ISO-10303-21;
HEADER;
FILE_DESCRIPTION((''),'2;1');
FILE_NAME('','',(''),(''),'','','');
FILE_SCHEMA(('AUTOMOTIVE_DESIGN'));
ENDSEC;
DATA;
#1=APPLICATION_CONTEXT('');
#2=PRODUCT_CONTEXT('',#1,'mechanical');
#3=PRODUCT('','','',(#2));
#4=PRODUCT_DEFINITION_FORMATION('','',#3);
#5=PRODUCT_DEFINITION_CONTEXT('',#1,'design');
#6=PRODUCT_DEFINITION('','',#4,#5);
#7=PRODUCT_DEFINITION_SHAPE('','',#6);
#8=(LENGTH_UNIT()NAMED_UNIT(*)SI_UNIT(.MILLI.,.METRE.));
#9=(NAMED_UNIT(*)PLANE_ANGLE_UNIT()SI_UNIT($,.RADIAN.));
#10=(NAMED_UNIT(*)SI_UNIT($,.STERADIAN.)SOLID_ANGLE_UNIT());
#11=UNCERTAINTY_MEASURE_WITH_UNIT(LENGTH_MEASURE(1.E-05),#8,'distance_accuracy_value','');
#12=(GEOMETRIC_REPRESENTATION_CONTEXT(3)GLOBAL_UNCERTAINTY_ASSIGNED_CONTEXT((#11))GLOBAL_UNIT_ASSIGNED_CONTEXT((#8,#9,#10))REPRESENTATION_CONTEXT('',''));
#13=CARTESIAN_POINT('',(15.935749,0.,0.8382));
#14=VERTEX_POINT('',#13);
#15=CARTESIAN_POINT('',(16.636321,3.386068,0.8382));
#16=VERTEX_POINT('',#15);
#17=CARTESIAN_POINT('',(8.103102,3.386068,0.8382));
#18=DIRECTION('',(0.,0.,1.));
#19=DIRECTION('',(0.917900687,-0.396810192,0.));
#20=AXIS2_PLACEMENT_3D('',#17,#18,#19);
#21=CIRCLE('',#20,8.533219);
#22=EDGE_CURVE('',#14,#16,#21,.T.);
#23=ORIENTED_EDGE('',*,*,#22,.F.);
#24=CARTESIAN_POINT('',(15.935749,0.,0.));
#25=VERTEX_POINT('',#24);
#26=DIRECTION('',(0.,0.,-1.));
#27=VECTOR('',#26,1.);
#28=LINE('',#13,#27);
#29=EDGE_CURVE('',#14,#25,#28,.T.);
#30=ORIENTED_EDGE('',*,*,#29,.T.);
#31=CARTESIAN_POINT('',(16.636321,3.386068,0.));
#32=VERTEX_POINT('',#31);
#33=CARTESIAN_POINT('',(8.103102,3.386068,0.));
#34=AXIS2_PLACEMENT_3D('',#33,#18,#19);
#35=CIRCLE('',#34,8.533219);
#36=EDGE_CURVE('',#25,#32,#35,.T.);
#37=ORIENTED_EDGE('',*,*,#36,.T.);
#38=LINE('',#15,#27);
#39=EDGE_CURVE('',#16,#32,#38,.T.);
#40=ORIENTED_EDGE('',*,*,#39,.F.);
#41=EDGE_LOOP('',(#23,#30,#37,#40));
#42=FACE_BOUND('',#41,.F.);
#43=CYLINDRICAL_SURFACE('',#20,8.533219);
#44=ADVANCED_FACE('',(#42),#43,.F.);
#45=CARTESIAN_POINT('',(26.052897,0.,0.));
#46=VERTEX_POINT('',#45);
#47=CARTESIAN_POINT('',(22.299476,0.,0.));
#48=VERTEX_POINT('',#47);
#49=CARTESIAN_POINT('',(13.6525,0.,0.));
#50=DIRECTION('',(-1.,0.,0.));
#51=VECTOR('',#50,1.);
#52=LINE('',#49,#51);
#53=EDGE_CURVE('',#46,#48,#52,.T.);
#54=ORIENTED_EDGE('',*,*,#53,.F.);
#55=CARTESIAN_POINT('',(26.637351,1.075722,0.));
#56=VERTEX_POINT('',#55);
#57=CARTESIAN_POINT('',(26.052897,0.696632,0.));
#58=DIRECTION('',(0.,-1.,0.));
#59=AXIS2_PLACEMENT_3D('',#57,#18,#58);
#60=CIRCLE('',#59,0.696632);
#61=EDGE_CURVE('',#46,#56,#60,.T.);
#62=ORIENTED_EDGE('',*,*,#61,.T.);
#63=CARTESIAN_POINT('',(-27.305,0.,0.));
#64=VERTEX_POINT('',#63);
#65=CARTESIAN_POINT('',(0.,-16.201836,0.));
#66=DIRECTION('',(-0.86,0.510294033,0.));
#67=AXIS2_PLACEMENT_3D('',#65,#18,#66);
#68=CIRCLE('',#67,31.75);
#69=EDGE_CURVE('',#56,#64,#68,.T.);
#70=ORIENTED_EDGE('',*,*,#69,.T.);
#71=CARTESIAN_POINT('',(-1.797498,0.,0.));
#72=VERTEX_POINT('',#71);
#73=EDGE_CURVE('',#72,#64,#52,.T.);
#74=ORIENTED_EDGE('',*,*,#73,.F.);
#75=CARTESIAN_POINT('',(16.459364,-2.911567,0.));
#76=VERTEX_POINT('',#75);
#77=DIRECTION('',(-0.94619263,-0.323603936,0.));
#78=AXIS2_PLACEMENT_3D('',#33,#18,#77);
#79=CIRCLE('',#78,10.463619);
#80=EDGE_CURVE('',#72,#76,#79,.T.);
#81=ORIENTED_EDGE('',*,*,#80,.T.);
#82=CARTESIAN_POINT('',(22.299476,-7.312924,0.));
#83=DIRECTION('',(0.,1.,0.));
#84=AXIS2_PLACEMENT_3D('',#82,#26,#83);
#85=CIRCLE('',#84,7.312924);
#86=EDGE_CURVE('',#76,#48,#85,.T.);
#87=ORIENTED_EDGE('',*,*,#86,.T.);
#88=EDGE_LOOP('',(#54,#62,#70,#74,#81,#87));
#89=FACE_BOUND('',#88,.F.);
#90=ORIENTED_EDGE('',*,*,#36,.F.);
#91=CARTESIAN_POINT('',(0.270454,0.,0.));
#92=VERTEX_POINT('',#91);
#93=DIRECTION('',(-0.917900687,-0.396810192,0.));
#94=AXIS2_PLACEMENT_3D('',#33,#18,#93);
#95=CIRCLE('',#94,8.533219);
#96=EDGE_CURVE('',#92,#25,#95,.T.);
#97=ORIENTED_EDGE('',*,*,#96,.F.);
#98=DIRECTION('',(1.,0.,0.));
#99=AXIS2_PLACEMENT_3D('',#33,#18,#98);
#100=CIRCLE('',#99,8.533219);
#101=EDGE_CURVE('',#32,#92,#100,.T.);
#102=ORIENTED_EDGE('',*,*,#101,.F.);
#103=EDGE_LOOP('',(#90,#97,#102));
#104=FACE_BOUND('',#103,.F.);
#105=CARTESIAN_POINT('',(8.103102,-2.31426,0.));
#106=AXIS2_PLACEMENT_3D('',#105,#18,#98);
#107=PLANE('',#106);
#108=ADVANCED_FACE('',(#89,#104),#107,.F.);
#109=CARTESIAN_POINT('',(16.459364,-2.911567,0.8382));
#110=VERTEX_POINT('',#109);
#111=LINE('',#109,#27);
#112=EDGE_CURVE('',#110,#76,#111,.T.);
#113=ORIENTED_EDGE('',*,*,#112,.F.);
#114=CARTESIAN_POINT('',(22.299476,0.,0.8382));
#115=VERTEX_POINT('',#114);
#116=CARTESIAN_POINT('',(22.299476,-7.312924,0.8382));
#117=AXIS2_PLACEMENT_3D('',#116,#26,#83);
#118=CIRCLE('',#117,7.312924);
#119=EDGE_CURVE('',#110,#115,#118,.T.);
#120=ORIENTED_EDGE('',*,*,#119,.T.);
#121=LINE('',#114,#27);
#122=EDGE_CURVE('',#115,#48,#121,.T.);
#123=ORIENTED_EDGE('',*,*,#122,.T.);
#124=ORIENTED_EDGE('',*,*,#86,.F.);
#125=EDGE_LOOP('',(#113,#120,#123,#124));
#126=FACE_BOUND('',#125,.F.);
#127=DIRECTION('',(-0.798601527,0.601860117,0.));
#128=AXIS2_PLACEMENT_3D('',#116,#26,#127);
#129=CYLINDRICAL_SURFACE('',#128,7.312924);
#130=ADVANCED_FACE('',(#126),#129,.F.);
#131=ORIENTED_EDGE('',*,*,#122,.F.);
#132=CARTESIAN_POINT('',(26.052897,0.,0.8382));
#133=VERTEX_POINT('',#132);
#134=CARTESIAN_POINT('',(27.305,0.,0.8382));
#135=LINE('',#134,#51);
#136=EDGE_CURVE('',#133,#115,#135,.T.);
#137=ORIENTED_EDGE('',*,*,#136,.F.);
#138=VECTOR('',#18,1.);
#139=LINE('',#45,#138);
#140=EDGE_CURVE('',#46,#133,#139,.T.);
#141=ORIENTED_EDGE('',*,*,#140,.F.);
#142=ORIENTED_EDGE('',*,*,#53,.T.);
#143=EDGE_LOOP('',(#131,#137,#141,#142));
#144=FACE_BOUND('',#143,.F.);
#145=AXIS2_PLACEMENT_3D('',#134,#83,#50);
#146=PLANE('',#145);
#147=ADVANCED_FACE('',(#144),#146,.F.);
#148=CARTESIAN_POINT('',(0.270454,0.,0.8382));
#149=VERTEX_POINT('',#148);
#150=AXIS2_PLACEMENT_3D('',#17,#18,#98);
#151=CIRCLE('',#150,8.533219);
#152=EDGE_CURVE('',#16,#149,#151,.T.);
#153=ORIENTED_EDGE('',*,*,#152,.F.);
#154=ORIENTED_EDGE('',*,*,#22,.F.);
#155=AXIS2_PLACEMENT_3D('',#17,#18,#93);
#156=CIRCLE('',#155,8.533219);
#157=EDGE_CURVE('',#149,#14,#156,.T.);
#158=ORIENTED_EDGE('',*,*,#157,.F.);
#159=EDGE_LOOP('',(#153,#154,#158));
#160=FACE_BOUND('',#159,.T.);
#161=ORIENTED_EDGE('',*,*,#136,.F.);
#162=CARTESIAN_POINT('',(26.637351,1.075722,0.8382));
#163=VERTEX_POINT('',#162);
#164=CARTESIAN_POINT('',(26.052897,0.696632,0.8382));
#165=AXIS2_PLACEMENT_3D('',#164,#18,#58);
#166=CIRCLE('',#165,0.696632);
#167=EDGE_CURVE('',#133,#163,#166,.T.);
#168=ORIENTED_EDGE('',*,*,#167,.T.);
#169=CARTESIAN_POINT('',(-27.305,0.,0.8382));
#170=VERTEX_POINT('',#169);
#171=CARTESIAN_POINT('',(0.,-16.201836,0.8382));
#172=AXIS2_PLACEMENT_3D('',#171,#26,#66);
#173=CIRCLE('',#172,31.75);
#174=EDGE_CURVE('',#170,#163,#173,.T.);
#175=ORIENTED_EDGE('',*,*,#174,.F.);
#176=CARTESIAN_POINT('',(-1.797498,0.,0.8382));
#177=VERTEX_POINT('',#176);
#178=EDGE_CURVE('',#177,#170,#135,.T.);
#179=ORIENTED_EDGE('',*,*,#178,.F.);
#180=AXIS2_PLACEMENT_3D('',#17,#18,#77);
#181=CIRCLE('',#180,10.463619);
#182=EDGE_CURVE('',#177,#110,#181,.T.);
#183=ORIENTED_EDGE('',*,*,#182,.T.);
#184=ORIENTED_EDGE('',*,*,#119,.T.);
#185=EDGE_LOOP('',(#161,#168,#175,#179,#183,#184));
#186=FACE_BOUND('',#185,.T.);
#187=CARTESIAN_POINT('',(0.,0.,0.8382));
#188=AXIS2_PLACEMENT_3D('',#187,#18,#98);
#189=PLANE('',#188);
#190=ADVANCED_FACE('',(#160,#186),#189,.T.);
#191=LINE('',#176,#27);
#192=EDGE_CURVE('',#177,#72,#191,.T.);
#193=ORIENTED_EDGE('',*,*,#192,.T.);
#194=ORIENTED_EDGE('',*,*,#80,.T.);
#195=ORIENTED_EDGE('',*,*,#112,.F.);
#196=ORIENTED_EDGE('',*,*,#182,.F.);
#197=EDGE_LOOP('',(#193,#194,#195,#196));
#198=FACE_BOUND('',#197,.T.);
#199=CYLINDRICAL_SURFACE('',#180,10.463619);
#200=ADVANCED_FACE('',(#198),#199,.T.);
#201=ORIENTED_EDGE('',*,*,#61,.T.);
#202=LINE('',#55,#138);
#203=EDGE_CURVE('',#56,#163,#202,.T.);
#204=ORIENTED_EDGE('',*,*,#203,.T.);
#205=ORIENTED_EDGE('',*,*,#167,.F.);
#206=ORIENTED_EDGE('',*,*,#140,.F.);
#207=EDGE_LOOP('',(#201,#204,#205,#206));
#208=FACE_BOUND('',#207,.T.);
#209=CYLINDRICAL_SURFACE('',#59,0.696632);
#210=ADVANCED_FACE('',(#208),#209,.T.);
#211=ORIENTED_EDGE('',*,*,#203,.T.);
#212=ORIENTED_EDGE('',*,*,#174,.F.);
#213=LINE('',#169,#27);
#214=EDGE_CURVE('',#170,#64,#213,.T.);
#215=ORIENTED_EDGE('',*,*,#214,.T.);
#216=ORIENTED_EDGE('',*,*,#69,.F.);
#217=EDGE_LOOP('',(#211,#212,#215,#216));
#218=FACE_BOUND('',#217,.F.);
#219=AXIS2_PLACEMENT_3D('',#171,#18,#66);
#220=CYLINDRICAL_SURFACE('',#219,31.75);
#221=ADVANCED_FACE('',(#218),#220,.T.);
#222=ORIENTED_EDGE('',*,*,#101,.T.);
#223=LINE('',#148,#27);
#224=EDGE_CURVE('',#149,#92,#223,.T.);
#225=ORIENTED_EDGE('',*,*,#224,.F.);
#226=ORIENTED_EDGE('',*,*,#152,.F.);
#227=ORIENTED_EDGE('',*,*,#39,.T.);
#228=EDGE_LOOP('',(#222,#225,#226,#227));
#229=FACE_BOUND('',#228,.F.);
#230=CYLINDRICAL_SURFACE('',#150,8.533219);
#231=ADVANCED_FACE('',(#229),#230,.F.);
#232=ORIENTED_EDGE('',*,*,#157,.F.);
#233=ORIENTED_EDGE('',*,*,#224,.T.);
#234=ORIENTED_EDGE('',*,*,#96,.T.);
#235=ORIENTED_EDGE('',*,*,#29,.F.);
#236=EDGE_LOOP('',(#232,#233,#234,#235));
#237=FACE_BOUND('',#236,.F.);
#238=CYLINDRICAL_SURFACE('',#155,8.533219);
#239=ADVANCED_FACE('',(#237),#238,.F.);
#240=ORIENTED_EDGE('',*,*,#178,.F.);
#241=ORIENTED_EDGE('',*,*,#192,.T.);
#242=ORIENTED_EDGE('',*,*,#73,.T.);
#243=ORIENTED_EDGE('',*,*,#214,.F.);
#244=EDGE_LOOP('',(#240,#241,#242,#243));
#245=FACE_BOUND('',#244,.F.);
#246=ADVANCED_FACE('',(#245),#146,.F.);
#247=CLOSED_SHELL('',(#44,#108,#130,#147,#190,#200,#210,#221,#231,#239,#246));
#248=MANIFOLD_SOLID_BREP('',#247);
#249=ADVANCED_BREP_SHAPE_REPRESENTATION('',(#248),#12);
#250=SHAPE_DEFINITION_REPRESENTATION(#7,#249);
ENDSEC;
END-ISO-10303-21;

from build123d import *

# Parameters (mm, degrees)
F0_R      = 27.305
F1_DEPTH  = 0.8382
F3_DEPTH  = 25.4
F5_DEPTH  = 25.4
F9_DEPTH  = 0.8382
F10_DEPTH = 17.5768
F11_R     = 7.312924092
F12_R     = 0.6966323576


with BuildPart() as f1:
    # F0 (on Top) → F1 (new body)
    with BuildSketch(Plane.XY):
        Circle(F0_R)
    extrude(amount=F1_DEPTH)

    # F2 (on face) → F3 (cut)
    with BuildSketch(Plane.XY.offset(0.8382)):
        with BuildLine():
            Line((27.305, 0), (-27.305, 0))
            ThreePointArc((-27.305, 0), (0, -27.305), (27.305, 0))
        make_face()
    extrude(amount=-F3_DEPTH, mode=Mode.SUBTRACT)

    # F4 (on face) → F5 (cut)
    with BuildSketch(Plane.XY.offset(0.8382)):
        with BuildLine():
            ThreePointArc((-27.305, 0), (0, 15.5481644558), (27.305, 0))
            ThreePointArc((27.305, 0), (0, 27.305), (-27.305, 0))
        make_face()
    extrude(amount=-F5_DEPTH, mode=Mode.SUBTRACT)

    # F7 (on face) + F6 (on face) → F9 (join)
    with BuildSketch(Plane.XY.offset(0.8382)):
        with BuildLine():
            Line((-1.7974979465, 0), (18.003700975, 0))
            ThreePointArc((18.003700975, 0), (18.4250061935, 1.6697896776), (18.566720813, 3.3860683907))
            ThreePointArc((18.566720813, 3.3860683907), (6.3868228012, 13.7079730699), (-1.7974979465, 0))
        make_face()
    with BuildSketch(Plane.XY.offset(0.8382)):
        with BuildLine():
            Line((18.003700975, 0), (-1.7974979465, 0))
            ThreePointArc((-1.7974979465, 0), (8.1031015143, -7.077550908), (18.003700975, 0))
        make_face()
    extrude(amount=-F9_DEPTH)

    # F8 (on face) → F10 (cut)
    with BuildSketch(Plane.XY.offset(0.8382)):
        with BuildLine():
            ThreePointArc((15.935749386, 0), (16.4593427121, 1.6571771644), (16.6363208264, 3.3860683907))
            ThreePointArc((16.6363208264, 3.3860683907), (6.374210288, 11.7423095885), (0.2704536426, 0))
            Line((0.2704536426, 0), (15.935749386, 0))
        make_face()
        with BuildLine():
            Line((15.935749386, 0), (0.2704536426, 0))
            ThreePointArc((0.2704536426, 0), (8.1031015143, -5.1471509214), (15.935749386, 0))
        make_face()
    extrude(amount=-F10_DEPTH, mode=Mode.SUBTRACT)

    # F11
    f11_edges = [f1.edges().sort_by_distance(p)[0] for p in [
        (18.003701, 0, 0.4191),
    ]]
    fillet(f11_edges, radius=F11_R)

    # F12
    f12_edges = [f1.edges().sort_by_distance(p)[0] for p in [
        (27.305, 0, 0.4191),
    ]]
    fillet(f12_edges, radius=F12_R)


solid = f1.part
